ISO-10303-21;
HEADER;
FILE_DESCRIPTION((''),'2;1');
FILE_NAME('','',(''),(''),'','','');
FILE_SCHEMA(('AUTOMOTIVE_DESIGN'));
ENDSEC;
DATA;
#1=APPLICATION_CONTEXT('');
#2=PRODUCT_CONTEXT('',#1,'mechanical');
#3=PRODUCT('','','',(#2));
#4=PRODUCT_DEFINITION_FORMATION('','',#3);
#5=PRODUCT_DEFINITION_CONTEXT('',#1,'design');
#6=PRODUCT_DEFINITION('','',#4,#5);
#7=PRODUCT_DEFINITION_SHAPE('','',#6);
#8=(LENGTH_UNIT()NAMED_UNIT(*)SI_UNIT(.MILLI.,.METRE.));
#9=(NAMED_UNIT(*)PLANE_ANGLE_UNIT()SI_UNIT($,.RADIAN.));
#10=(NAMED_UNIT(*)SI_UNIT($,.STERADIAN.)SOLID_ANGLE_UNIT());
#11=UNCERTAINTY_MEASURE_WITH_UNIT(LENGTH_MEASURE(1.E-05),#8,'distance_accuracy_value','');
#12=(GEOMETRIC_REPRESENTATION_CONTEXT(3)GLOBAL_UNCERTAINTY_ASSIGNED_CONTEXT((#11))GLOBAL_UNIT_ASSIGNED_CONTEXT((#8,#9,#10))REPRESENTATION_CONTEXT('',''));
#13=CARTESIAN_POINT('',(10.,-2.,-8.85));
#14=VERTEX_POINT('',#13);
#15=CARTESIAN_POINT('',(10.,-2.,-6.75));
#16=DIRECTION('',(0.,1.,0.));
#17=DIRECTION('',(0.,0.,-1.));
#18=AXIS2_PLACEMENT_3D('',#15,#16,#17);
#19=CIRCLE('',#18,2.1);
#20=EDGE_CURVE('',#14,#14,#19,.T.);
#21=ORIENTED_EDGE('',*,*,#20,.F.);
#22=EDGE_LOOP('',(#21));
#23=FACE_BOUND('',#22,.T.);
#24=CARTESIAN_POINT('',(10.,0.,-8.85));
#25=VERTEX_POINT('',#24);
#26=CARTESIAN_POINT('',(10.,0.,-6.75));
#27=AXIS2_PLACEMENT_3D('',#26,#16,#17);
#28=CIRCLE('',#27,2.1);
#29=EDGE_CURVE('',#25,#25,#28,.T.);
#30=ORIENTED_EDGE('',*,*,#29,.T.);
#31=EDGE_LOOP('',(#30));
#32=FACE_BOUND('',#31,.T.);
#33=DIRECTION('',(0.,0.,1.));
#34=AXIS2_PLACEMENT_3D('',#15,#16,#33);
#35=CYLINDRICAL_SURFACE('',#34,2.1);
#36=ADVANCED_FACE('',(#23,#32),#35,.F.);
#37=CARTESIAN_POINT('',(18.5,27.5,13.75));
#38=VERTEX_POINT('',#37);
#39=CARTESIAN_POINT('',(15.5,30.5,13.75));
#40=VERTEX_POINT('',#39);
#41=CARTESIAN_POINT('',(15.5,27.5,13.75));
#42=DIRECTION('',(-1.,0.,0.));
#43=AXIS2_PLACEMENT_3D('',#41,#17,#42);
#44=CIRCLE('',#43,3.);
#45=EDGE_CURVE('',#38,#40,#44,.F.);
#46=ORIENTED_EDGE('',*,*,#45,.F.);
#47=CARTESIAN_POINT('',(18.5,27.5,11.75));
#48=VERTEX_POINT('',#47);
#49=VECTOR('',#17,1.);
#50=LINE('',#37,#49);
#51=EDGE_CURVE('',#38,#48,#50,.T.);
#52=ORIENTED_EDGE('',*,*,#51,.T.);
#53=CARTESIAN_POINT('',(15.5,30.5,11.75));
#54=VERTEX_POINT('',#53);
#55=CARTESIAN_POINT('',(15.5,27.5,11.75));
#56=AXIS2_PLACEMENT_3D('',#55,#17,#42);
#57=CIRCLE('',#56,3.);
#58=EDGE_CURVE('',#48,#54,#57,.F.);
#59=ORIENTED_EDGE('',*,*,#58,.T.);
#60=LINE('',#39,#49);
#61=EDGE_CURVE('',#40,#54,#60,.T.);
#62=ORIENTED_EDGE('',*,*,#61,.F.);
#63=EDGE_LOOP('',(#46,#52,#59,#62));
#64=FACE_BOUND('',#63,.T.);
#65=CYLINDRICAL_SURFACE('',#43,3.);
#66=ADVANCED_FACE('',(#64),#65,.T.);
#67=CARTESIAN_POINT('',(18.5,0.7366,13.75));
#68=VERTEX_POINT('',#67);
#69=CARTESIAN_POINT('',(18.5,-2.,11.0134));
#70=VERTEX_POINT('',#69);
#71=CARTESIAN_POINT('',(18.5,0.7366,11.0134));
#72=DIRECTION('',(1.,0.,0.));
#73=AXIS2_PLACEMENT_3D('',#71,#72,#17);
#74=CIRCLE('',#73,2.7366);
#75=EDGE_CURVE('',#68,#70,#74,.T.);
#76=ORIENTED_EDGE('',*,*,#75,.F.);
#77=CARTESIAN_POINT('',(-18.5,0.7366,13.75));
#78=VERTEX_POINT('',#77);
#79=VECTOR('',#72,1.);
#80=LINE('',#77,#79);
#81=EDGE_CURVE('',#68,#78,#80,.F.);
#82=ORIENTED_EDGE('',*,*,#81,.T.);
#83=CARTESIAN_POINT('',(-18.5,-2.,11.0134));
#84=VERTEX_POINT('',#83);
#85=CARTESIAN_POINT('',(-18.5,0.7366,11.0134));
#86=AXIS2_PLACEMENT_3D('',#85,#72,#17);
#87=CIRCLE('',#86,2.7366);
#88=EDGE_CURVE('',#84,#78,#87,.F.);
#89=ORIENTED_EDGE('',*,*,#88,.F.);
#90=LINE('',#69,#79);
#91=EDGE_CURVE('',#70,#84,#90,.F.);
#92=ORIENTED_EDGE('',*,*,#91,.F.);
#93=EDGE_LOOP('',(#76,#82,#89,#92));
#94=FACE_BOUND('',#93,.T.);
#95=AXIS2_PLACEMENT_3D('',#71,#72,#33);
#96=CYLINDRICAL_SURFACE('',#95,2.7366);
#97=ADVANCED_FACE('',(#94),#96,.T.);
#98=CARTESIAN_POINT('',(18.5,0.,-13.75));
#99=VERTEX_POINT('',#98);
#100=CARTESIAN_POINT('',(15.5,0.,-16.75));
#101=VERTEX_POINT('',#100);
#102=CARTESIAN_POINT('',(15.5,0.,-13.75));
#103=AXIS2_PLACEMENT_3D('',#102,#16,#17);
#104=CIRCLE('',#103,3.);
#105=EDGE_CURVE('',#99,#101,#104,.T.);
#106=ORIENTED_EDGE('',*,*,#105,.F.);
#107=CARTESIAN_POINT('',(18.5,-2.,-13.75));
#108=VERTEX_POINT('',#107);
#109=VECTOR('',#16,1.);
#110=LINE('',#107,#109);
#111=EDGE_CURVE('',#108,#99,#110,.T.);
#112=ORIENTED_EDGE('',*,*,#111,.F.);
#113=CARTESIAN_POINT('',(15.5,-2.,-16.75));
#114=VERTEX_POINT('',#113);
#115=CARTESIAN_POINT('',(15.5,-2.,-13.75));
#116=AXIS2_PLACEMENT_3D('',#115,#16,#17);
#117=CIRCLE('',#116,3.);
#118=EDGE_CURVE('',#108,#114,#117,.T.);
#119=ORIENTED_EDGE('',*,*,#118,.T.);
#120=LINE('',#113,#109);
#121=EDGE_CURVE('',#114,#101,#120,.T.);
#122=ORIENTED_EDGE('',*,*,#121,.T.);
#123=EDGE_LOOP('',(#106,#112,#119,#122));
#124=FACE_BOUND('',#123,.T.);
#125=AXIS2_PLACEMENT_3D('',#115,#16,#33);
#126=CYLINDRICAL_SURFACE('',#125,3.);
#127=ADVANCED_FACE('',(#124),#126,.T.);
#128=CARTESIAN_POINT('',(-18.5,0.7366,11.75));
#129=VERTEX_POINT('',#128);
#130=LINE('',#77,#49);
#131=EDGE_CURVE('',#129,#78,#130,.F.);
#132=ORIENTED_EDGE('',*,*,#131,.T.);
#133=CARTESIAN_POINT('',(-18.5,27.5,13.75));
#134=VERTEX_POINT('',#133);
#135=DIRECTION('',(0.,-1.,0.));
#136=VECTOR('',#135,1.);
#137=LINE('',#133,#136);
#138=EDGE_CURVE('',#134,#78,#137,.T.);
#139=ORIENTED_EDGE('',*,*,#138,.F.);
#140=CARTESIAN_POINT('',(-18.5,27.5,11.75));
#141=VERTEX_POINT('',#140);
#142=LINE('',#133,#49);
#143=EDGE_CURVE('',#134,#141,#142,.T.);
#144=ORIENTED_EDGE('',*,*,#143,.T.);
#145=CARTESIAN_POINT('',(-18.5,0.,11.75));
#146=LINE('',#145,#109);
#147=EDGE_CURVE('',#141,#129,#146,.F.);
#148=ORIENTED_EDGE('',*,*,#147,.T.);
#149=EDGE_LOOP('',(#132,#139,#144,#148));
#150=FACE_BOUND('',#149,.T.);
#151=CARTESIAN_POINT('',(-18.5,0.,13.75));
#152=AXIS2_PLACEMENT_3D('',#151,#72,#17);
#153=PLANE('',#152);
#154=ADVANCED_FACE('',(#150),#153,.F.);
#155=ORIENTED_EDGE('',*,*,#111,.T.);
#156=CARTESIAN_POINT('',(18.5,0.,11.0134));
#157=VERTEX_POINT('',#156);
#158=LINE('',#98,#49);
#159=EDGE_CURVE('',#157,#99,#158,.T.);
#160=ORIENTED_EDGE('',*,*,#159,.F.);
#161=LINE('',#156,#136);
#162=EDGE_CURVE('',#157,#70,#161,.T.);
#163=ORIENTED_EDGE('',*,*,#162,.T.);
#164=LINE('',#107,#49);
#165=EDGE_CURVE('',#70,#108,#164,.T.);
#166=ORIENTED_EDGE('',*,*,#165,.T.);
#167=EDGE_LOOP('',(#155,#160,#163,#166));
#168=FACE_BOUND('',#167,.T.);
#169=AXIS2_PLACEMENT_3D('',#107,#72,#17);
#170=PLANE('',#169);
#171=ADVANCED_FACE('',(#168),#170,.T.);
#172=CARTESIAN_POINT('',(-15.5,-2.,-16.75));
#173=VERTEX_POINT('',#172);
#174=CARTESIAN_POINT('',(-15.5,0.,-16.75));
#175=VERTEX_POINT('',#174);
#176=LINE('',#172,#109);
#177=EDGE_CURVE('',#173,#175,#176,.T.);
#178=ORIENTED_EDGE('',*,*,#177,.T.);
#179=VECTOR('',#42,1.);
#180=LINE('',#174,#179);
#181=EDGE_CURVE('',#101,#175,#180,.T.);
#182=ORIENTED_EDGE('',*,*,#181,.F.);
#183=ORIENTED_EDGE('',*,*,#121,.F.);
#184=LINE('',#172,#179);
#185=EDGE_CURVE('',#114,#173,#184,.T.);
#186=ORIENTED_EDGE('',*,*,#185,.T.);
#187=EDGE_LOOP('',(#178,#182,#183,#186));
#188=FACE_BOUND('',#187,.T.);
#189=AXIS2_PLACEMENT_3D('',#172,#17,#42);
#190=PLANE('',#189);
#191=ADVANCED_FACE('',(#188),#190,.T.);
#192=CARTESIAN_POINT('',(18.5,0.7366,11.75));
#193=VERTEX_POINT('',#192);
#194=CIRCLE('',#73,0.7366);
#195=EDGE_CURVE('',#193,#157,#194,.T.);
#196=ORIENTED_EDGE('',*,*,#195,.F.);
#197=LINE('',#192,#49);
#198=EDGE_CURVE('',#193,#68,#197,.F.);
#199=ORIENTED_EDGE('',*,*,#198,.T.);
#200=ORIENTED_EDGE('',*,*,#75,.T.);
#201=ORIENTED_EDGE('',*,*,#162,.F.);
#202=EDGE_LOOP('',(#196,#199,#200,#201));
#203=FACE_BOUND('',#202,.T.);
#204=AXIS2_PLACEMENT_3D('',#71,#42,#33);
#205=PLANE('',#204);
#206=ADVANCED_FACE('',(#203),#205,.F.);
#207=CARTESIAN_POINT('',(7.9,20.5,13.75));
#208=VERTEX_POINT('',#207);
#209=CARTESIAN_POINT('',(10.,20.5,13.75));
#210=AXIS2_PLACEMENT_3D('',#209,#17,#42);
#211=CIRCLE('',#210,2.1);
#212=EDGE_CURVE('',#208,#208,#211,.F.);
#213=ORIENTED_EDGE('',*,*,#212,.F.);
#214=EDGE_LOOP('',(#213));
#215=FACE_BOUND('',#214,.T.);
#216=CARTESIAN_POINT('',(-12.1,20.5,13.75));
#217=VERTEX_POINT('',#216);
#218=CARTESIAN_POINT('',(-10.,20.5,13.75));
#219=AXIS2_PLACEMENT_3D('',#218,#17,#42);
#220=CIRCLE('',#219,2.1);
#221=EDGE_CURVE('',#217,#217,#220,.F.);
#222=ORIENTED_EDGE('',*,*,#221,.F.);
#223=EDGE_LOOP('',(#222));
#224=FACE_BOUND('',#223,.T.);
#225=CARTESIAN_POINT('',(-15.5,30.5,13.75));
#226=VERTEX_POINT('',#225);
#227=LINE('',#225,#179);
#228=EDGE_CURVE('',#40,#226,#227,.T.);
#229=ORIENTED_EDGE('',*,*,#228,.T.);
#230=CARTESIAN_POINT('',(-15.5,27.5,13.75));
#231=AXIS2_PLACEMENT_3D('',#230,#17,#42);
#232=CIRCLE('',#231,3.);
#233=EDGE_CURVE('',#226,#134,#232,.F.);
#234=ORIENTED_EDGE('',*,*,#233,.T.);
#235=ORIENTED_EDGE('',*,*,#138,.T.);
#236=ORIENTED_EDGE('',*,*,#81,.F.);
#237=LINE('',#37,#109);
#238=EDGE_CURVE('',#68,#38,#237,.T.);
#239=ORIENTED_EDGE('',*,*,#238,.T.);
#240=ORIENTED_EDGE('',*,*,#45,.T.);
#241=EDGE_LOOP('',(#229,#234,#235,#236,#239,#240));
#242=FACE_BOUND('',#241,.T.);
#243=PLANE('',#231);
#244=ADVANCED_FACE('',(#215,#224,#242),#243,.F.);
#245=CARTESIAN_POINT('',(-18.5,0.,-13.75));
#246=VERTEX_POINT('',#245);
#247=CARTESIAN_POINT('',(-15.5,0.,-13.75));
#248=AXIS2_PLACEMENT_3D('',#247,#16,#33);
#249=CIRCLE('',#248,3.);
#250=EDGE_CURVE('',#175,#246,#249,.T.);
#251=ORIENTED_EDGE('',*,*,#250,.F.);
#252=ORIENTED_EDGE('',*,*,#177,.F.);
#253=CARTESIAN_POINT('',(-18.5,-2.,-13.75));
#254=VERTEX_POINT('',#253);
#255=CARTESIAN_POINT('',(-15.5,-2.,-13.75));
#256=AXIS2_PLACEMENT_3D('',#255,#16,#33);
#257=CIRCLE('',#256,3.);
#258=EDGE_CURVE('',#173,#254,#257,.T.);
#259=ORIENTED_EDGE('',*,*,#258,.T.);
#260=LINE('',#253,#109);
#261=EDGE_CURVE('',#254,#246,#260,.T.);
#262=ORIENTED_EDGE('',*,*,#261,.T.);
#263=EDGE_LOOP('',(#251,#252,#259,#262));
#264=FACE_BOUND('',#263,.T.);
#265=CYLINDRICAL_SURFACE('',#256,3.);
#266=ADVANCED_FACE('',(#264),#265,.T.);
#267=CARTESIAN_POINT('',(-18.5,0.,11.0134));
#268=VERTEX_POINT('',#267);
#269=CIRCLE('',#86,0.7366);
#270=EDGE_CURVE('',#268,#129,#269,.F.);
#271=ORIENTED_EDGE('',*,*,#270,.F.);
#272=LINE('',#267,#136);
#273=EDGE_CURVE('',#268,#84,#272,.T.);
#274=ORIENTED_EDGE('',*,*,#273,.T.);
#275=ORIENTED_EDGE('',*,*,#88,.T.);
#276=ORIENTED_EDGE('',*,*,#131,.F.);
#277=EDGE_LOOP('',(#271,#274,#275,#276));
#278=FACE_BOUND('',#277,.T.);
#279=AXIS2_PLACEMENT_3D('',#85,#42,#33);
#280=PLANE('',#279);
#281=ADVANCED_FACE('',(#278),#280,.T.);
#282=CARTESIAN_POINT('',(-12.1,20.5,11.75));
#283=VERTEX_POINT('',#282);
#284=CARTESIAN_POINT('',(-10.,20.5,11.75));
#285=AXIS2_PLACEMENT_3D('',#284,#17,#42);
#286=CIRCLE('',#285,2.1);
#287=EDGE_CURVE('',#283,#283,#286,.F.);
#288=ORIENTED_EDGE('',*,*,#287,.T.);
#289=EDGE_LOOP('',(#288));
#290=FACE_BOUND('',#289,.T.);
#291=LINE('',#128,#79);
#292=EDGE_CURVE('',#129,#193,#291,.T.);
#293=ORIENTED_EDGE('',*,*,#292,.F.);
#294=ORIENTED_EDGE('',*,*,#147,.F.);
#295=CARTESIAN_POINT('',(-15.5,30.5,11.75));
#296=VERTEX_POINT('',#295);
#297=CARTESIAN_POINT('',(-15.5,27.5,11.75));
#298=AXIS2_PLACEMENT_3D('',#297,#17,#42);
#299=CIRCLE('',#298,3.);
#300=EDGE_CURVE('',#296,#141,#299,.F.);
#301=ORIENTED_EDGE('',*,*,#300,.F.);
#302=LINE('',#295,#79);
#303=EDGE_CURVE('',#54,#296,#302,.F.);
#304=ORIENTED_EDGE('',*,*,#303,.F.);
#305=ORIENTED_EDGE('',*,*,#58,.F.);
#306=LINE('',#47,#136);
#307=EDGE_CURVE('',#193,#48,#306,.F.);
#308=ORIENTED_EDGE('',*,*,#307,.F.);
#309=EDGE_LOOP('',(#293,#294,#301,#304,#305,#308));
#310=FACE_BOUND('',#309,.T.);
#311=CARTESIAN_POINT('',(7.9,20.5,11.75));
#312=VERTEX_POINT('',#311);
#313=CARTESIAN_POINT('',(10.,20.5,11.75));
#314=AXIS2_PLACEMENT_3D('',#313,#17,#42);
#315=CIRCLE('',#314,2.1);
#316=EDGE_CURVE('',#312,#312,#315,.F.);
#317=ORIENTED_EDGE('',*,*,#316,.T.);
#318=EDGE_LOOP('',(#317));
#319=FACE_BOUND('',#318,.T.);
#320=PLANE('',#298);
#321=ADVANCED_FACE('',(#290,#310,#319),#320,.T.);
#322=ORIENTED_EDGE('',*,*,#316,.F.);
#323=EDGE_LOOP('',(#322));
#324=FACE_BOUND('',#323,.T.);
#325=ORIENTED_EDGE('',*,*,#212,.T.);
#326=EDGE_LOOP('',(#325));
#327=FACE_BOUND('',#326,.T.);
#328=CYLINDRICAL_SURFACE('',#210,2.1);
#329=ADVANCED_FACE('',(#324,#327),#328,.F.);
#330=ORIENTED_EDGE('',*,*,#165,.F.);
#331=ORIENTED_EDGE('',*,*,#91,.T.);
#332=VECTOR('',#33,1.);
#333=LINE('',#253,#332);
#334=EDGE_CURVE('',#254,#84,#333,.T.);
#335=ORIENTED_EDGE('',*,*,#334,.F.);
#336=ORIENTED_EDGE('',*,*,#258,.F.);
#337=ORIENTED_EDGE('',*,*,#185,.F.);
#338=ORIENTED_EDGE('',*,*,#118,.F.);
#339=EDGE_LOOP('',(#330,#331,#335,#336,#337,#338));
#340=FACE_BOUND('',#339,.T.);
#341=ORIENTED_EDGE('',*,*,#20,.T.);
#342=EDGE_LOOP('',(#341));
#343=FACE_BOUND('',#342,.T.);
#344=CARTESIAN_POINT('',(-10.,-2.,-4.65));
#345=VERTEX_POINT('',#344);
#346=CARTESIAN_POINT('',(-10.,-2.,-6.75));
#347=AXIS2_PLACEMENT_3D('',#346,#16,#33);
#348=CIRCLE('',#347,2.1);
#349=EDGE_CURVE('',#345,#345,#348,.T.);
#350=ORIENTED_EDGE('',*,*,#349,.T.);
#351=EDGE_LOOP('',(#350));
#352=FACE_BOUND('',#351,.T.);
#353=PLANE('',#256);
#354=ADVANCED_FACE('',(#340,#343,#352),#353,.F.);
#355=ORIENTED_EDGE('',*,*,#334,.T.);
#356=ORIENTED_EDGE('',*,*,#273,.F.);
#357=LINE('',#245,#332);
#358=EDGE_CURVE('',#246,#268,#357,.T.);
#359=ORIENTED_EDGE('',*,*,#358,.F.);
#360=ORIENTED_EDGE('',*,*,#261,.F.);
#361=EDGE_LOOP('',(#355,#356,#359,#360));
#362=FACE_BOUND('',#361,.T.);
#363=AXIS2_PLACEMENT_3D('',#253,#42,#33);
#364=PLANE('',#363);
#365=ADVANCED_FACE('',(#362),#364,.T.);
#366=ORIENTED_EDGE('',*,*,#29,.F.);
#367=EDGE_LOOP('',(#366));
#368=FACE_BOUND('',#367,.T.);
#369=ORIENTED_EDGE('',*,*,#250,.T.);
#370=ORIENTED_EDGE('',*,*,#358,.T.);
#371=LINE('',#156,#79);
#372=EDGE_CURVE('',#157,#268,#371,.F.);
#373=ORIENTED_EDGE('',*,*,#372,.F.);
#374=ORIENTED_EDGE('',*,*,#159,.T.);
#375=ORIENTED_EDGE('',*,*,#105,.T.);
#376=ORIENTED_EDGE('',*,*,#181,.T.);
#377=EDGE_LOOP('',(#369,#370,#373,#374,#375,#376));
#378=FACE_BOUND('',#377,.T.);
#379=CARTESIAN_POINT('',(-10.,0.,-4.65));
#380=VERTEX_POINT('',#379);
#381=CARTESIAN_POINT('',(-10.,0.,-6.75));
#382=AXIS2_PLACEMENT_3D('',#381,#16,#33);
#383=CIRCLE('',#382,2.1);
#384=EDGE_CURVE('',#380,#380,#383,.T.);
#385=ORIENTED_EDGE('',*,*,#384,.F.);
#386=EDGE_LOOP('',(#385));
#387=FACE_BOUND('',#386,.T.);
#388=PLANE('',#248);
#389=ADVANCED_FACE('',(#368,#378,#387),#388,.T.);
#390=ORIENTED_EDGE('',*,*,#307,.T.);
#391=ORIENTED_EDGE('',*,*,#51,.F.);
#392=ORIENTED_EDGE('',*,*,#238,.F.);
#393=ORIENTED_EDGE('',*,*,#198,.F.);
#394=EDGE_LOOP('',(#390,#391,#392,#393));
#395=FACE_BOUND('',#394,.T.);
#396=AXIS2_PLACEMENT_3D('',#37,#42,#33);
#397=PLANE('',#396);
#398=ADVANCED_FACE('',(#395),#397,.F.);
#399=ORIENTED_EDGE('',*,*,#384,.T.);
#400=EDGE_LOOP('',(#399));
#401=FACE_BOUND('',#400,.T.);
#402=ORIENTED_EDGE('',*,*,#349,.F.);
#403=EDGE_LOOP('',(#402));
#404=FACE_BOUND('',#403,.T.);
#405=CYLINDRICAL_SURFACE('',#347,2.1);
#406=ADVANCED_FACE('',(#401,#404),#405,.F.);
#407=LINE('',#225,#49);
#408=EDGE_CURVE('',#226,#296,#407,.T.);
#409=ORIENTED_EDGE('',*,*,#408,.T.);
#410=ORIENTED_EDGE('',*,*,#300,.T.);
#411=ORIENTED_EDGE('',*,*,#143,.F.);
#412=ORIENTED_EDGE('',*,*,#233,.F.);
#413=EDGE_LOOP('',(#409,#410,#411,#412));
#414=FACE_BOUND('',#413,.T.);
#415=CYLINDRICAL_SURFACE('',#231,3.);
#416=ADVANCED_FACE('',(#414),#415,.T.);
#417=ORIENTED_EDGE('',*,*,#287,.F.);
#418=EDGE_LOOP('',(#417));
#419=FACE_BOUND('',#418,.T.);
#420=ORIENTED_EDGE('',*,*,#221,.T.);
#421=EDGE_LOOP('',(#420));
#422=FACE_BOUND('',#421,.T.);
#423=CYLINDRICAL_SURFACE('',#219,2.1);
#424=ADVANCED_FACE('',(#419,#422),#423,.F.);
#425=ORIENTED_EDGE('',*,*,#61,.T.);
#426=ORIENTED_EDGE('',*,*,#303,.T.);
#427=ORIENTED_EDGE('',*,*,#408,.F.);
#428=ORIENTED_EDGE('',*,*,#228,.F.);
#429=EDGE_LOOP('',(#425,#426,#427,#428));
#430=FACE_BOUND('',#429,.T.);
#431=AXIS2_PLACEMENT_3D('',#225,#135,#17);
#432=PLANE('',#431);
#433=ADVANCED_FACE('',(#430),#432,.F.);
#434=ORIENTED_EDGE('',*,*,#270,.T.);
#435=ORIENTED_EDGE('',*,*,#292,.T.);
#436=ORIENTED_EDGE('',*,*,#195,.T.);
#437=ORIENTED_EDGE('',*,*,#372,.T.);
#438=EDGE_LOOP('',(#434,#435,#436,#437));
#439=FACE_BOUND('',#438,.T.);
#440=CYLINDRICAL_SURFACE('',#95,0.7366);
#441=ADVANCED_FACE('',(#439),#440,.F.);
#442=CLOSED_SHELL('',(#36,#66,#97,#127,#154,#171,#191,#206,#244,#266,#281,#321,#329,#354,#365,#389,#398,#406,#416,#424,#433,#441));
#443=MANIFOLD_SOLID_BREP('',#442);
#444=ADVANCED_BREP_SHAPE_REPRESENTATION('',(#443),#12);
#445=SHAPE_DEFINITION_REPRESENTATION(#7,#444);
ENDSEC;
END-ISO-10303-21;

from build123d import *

# Parameters (mm, degrees)
SKETCH_1_R                       = 2.1
SM_BASE_FLANGE_1_DEPTH           = 2
SM_EDGE_FLANGE_1_STRIP_W         = 9.4732
SM_EDGE_FLANGE_1_STRIP_H         = 2
SM_EDGE_FLANGE_1_STRIP_CUT_DEPTH = 37
SM_EDGE_FLANGE_1_DEPTH           = 37
SM_EDGE_FLANGE_1_PROFILE_R       = 2.1
SM_EDGE_FLANGE_1_FLAT_DEPTH      = 2


# Sheet-metal steps are written as plain solids
with BuildPart() as part:
    # Sketch 1 → 基体-法兰1 (new body)
    with BuildSketch(Plane(origin=(0, 0, 0), x_dir=(1, 0, 0), z_dir=(0, 1, 0))):
        with BuildLine():
            Line((-15.5, 16.75), (15.5, 16.75))
            ThreePointArc((15.5, 16.75), (17.621320344, 15.871320344), (18.5, 13.75))
            Line((18.5, 13.75), (18.5, -13.75))
            Line((18.5, -13.75), (-18.5, -13.75))
            Line((-18.5, -13.75), (-18.5, 13.75))
            ThreePointArc((-18.5, 13.75), (-17.621320344, 15.871320344), (-15.5, 16.75))
        make_face()
        with Locations(Location((-10, 6.75, 0), (0, 0, 270))):
            Circle(SKETCH_1_R, mode=Mode.SUBTRACT)
        with Locations(Location((10, 6.75, 0), (0, 0, 90))):
            Circle(SKETCH_1_R, mode=Mode.SUBTRACT)
    extrude(amount=-SM_BASE_FLANGE_1_DEPTH)

    # 边线-法兰1 strip (across the edge) → 边线-法兰1 strip cut (cut)
    with BuildSketch(Plane(origin=(-18.5, 0, 13.75), x_dir=(0, 0, -1), z_dir=(1, 0, 0))):
        with Locations((-2, -1)):
            Rectangle(SM_EDGE_FLANGE_1_STRIP_W, SM_EDGE_FLANGE_1_STRIP_H)
    extrude(amount=SM_EDGE_FLANGE_1_STRIP_CUT_DEPTH, mode=Mode.SUBTRACT)

    # 边线-法兰1 bend section (across the edge) → 边线-法兰1 (add)
    with BuildSketch(Plane(origin=(-18.5, 0, 13.75), x_dir=(0, 0, -1), z_dir=(1, 0, 0))):
        with BuildLine():
            Line((0, 0.7366), (2, 0.7366))
            ThreePointArc((2, 0.7366), (2.215745145, 0.215745145), (2.7366, 0))
            Line((2.7366, 0), (2.7366, -2))
            ThreePointArc((2.7366, -2), (0.801531583, -1.198468417), (0, 0.7366))
        make_face()
    extrude(amount=SM_EDGE_FLANGE_1_DEPTH)

    # 边线-法兰1 profile (on flange) → 边线-法兰1 flat (add)
    with BuildSketch(Plane.XY.offset(13.75)):
        with BuildLine():
            Line((-18.5, 27.5), (-18.5, 0.7366))
            Line((-18.5, 0.7366), (18.5, 0.7366))
            Line((18.5, 0.7366), (18.5, 27.5))
            ThreePointArc((18.5, 27.5), (17.621320344, 29.621320344), (15.5, 30.5))
            Line((15.5, 30.5), (-15.5, 30.5))
            ThreePointArc((-15.5, 30.5), (-17.621320344, 29.621320344), (-18.5, 27.5))
        make_face()
        with Locations((-10, 20.5)):
            Circle(SM_EDGE_FLANGE_1_PROFILE_R, mode=Mode.SUBTRACT)
        with Locations((10, 20.5)):
            Circle(SM_EDGE_FLANGE_1_PROFILE_R, mode=Mode.SUBTRACT)
    extrude(amount=-SM_EDGE_FLANGE_1_FLAT_DEPTH)


solid = part.part
